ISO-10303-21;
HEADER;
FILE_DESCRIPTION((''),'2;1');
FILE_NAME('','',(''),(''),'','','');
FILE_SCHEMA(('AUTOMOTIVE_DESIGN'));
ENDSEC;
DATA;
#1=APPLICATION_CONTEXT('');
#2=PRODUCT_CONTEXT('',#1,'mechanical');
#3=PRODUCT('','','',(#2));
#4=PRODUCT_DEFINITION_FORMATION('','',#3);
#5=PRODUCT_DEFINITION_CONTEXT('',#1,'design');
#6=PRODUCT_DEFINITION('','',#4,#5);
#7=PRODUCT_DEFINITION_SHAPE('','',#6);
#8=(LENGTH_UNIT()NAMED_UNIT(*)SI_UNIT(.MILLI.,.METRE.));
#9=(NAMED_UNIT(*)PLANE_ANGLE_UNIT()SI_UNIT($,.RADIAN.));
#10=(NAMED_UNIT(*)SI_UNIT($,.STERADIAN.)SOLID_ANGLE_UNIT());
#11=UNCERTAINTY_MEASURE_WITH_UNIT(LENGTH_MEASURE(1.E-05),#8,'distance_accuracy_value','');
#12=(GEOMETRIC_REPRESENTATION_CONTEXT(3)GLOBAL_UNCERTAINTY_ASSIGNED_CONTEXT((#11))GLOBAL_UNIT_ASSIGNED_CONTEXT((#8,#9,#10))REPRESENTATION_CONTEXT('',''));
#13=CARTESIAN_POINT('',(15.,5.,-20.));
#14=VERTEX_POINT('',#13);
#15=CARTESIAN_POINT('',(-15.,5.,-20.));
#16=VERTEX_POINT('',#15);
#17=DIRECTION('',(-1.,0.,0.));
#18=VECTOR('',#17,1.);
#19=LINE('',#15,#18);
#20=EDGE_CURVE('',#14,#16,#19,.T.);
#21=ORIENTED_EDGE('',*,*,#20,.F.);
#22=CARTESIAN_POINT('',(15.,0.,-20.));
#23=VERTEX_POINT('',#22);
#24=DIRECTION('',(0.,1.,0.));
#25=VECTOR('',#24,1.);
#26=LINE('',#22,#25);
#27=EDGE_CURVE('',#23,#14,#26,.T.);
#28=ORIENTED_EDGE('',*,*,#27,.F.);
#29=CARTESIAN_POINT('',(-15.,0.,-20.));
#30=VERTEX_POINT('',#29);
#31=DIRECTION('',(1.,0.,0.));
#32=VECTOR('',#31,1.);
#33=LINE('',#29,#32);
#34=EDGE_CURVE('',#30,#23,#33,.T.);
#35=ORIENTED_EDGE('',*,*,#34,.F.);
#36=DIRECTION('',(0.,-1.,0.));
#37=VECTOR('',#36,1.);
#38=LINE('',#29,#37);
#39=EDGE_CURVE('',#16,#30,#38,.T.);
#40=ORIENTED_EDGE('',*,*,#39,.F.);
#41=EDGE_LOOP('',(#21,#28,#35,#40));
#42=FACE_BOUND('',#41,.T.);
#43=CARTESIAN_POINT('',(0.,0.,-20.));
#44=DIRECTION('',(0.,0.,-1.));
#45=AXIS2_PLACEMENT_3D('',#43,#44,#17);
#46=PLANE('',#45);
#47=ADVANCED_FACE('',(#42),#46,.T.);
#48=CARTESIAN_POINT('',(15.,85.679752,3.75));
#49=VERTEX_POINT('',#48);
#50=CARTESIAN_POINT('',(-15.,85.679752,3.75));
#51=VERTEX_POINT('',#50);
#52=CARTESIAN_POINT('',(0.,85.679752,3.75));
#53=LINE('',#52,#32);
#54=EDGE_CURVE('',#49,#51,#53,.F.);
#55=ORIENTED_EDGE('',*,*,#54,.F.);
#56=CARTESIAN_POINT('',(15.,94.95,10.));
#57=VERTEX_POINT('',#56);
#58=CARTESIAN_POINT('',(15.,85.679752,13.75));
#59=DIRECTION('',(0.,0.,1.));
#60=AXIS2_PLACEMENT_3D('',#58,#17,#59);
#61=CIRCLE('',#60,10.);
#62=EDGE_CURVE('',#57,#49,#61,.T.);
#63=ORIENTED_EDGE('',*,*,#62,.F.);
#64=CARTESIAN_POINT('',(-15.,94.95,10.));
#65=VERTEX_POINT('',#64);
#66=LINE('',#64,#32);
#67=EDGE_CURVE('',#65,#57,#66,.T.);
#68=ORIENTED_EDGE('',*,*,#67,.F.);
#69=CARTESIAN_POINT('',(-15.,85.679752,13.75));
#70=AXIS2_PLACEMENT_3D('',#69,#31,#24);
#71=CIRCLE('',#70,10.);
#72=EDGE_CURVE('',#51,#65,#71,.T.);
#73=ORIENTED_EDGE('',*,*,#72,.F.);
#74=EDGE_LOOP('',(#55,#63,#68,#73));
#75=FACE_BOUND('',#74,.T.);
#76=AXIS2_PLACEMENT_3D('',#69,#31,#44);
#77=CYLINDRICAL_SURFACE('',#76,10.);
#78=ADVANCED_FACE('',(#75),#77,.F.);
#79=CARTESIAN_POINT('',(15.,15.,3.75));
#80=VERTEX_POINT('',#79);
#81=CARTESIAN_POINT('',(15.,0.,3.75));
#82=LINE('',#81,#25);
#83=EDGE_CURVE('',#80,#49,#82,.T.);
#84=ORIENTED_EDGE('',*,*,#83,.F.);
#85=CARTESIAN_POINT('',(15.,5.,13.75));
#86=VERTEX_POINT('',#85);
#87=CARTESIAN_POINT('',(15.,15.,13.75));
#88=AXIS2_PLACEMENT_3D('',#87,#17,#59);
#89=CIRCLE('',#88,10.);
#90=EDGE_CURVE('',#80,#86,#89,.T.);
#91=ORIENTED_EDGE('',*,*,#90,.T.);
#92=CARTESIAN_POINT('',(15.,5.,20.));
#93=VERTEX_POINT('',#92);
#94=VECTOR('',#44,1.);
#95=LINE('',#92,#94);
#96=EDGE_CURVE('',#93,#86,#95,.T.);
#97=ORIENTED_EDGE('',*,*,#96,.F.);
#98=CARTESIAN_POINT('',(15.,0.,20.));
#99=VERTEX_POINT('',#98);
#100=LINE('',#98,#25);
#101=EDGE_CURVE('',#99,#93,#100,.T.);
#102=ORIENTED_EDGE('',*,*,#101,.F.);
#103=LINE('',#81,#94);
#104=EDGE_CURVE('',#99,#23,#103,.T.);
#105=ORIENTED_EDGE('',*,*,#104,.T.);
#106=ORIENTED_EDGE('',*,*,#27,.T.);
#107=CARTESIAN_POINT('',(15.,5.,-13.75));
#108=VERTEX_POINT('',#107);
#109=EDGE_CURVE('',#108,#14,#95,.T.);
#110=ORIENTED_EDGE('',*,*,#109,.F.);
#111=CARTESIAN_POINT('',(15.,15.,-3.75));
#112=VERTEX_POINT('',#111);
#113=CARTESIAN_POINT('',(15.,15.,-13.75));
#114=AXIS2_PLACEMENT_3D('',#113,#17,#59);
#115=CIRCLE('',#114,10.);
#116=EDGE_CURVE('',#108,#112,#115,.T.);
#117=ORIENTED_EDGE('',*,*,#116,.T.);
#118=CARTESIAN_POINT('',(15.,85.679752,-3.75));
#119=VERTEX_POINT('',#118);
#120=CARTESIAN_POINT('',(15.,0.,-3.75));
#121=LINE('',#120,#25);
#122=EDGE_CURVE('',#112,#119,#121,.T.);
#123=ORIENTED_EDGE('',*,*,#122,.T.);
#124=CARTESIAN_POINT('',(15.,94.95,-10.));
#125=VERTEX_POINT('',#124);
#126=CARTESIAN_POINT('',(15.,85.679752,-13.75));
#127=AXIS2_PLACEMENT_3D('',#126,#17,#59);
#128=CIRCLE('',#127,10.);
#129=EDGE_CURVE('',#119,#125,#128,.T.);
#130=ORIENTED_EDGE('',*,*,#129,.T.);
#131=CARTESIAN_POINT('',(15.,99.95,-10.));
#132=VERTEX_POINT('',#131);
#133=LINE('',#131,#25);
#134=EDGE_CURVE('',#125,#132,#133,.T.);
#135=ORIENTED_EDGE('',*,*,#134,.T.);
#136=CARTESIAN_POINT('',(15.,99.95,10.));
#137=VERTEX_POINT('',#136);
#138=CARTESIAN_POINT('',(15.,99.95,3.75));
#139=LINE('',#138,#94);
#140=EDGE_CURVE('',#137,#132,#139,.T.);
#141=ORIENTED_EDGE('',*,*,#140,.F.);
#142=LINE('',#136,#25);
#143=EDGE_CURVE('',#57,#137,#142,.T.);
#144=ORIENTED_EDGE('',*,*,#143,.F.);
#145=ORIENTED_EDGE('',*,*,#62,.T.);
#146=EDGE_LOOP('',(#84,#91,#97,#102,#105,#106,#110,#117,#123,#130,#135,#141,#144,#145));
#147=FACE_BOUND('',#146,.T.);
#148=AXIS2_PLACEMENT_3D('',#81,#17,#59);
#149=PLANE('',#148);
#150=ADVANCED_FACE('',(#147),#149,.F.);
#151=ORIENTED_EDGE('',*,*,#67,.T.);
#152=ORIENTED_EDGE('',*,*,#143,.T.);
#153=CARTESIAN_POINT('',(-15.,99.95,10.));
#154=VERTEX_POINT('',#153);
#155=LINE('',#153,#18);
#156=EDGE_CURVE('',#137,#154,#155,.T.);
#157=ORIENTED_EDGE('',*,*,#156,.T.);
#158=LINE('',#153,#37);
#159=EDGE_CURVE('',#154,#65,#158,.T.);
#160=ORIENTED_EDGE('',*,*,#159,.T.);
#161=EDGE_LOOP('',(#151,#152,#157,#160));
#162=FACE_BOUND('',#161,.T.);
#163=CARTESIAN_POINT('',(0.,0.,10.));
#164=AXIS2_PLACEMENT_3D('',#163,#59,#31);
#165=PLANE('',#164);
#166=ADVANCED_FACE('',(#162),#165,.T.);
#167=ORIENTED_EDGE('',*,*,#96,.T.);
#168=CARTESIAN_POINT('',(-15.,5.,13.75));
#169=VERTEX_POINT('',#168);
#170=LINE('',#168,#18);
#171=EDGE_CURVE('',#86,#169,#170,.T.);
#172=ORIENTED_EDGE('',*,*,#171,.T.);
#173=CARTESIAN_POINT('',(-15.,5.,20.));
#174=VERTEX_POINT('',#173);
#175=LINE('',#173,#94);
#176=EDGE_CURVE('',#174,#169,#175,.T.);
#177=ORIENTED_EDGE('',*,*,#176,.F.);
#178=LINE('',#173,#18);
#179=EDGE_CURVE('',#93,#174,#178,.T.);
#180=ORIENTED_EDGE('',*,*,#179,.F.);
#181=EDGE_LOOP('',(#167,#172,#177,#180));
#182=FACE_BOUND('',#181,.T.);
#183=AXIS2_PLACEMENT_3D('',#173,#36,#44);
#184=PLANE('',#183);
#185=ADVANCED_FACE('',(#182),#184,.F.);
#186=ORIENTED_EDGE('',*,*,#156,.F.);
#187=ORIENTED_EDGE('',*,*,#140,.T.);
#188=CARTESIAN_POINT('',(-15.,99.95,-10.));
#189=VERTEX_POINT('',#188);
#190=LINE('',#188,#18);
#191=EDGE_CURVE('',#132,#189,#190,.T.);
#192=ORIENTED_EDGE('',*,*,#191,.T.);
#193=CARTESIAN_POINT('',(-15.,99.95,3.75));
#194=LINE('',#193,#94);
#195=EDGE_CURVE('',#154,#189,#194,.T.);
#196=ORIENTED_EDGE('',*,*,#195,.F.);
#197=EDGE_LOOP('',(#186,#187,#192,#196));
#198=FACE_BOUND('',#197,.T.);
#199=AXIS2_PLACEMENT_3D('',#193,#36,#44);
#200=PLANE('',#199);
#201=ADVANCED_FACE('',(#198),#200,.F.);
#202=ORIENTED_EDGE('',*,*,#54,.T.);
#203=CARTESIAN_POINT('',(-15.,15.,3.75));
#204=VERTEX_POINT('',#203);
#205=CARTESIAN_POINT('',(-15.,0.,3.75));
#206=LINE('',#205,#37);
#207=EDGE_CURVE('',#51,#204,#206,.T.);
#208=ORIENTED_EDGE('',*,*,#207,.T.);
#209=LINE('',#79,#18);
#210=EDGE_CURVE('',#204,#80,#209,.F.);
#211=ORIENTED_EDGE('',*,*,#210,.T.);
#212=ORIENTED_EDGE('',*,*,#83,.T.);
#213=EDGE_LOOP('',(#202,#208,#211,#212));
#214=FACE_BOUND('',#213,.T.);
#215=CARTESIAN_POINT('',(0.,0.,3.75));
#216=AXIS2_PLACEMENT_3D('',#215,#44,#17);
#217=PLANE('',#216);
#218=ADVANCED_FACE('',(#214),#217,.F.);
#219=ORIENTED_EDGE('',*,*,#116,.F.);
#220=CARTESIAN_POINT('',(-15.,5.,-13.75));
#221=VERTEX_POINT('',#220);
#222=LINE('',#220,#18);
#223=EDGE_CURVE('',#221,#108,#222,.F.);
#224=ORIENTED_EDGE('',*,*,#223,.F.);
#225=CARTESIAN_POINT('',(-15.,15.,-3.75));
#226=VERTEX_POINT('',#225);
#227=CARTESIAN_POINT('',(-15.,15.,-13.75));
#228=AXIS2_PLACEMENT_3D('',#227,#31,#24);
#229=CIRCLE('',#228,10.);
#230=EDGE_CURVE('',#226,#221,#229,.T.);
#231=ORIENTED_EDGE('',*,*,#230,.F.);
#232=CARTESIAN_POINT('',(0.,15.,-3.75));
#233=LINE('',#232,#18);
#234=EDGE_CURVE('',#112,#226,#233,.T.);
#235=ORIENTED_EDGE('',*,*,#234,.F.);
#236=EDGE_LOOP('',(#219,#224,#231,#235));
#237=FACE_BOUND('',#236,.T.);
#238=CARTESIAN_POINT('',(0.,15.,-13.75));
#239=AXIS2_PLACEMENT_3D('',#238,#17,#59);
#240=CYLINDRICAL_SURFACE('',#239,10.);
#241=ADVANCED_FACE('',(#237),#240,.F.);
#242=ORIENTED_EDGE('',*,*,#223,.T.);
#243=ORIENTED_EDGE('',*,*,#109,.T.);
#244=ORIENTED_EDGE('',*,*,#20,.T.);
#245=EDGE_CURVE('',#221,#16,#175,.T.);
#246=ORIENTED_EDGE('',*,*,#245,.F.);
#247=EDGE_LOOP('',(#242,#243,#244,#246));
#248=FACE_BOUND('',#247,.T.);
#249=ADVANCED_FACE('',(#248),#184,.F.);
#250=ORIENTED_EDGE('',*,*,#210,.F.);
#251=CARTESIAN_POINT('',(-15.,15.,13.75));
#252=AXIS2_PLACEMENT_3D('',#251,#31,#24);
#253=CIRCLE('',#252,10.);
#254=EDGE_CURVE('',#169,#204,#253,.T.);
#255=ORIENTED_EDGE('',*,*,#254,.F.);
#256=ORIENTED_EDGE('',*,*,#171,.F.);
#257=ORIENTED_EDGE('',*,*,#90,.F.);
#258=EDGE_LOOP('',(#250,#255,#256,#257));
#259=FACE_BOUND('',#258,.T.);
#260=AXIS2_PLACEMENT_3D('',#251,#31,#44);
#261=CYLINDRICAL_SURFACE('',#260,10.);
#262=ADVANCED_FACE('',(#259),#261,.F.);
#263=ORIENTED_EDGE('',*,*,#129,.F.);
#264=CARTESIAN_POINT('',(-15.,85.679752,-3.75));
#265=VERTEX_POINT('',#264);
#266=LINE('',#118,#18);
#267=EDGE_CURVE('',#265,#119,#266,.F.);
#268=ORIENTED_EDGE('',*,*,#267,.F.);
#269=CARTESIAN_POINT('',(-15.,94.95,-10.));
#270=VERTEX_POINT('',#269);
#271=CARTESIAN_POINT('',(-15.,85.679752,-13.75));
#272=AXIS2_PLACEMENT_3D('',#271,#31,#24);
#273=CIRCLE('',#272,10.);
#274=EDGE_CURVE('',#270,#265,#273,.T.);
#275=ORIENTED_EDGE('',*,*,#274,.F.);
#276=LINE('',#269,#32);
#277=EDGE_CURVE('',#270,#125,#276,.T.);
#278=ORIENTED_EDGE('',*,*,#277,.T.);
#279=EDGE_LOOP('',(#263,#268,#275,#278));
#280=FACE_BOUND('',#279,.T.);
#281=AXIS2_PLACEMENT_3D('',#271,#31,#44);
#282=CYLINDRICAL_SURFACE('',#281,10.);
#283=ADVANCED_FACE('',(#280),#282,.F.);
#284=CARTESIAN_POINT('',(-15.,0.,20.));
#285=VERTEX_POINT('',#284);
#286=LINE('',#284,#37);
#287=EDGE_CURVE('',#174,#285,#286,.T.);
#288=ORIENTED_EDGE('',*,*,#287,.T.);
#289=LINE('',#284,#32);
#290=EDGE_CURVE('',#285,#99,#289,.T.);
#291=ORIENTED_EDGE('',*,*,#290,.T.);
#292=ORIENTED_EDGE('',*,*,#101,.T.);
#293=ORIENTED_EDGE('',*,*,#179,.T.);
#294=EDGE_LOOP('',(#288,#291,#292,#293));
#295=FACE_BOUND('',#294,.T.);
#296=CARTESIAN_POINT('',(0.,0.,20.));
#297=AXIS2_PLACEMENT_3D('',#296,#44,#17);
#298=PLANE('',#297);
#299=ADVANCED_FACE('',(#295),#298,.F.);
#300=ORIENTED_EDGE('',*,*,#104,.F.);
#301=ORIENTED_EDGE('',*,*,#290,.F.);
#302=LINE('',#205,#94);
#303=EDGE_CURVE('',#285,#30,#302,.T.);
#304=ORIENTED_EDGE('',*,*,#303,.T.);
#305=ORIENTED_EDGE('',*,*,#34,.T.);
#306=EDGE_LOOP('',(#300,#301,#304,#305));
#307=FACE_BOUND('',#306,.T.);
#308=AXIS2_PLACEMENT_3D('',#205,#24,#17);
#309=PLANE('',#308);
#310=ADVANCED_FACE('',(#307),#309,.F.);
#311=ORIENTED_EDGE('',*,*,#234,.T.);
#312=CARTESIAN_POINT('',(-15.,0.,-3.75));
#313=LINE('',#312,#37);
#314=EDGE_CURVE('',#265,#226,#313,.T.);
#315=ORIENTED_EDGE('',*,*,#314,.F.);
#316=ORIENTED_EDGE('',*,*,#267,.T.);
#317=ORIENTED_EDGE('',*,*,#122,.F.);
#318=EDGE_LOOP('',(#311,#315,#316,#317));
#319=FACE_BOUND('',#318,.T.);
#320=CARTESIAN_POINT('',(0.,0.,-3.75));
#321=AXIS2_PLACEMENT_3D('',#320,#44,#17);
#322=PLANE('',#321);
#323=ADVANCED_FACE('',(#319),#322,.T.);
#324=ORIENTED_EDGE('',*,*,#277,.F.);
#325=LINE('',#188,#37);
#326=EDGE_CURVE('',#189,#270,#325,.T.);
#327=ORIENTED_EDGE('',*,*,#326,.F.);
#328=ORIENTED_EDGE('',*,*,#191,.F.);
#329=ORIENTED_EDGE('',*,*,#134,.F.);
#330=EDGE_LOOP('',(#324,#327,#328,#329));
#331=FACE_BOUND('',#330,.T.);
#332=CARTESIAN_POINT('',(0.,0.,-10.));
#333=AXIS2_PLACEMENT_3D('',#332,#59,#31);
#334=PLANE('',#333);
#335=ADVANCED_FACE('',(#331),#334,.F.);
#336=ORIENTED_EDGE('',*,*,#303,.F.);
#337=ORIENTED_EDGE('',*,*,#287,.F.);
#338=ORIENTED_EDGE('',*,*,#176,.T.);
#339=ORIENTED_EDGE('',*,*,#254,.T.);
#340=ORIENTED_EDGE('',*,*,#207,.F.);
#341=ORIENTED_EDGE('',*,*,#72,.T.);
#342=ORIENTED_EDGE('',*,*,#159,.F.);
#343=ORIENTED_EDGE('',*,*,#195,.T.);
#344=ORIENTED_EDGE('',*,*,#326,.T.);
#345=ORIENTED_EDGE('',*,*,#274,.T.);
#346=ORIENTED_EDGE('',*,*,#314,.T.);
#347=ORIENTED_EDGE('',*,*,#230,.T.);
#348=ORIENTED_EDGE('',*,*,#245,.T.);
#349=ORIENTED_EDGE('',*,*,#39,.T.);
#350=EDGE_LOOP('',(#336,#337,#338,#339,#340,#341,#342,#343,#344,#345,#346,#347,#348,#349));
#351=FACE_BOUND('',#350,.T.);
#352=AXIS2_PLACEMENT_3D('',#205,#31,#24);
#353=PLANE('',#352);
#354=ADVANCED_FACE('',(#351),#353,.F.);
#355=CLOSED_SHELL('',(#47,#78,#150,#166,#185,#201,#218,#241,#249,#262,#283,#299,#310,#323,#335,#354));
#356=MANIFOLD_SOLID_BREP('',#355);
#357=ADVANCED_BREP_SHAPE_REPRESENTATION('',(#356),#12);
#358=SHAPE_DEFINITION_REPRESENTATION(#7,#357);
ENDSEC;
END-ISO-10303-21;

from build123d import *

# Parameters (mm, degrees)
SKETCH1_W           = 30
SKETCH1_H           = 99.95
BOSS_EXTRUDE1_DEPTH = 3.75
SKETCH2_W           = 30
SKETCH2_H           = 5
BOSS_EXTRUDE2_DEPTH = 20
SKETCH3_W           = 30
SKETCH3_H           = 5
BOSS_EXTRUDE3_DEPTH = 10
FILLET1_R           = 10
FILLET2_R           = 10


with BuildPart() as part:
    # Sketch1 → Boss-Extrude1 (new, symmetric)
    with BuildSketch(Plane.XY):
        with Locations((0, 49.975)):
            Rectangle(SKETCH1_W, SKETCH1_H)
    extrude(amount=BOSS_EXTRUDE1_DEPTH, both=True)

    # Sketch2 → Boss-Extrude2 (add, symmetric)
    with BuildSketch(Plane.XY):
        with Locations((0, 2.5)):
            Rectangle(SKETCH2_W, SKETCH2_H)
    extrude(amount=BOSS_EXTRUDE2_DEPTH, both=True)

    # Sketch3 → Boss-Extrude3 (add, symmetric)
    with BuildSketch(Plane.XY):
        with Locations((0, 97.45)):
            Rectangle(SKETCH3_W, SKETCH3_H)
    extrude(amount=BOSS_EXTRUDE3_DEPTH, both=True)

    # Fillet1
    # the kernel refuses this fillet: 10 mm, written as the material it adds along each edge
    with BuildSketch(Plane(origin=(15, 94.95, -3.75), x_dir=(0, 0, -1), z_dir=(-1, 0, 0))) as fillet1_piece_1:
        with BuildLine():
            CenterArc((10, 9.270248109), FILLET1_R, 180, 67.975687163)
            Line((0, 9.270248109), (-0.2, 9.270248109))
            Line((-0.2, 9.270248109), (-0.2, 0))
            Line((-0.2, 0), (0, -0.2))
            ThreePointArc((0, -0.2), (3.125, -0.2), (6.175, -0.185404962))
            Line((6.175, -0.185404962), (6.25, 0))
        make_face()
    extrude(amount=30)
    with BuildSketch(Plane(origin=(15, 94.95, 3.75), x_dir=(0, -1, 0), z_dir=(-1, 0, 0))) as fillet1_piece_2:
        with BuildLine():
            CenterArc((9.270248109, 10), FILLET1_R, 202.024312837, 67.975687163)
            Line((0, 6.25), (-0.185404962, 6.175))
            ThreePointArc((-0.185404962, 6.175), (-0.2, 3.125), (-0.2, 0))
            Line((-0.2, 0), (0, -0.2))
            Line((0, -0.2), (9.270248109, -0.2))
            Line((9.270248109, -0.2), (9.270248109, 0))
        make_face()
    extrude(amount=30)

    # Fillet2
    fillet2_edges = [part.edges().sort_by_distance(p)[0] for p in [
        (0, 5, -3.75),
        (0, 5, 3.75),
    ]]
    fillet(fillet2_edges, radius=FILLET2_R)


solid = part.part
